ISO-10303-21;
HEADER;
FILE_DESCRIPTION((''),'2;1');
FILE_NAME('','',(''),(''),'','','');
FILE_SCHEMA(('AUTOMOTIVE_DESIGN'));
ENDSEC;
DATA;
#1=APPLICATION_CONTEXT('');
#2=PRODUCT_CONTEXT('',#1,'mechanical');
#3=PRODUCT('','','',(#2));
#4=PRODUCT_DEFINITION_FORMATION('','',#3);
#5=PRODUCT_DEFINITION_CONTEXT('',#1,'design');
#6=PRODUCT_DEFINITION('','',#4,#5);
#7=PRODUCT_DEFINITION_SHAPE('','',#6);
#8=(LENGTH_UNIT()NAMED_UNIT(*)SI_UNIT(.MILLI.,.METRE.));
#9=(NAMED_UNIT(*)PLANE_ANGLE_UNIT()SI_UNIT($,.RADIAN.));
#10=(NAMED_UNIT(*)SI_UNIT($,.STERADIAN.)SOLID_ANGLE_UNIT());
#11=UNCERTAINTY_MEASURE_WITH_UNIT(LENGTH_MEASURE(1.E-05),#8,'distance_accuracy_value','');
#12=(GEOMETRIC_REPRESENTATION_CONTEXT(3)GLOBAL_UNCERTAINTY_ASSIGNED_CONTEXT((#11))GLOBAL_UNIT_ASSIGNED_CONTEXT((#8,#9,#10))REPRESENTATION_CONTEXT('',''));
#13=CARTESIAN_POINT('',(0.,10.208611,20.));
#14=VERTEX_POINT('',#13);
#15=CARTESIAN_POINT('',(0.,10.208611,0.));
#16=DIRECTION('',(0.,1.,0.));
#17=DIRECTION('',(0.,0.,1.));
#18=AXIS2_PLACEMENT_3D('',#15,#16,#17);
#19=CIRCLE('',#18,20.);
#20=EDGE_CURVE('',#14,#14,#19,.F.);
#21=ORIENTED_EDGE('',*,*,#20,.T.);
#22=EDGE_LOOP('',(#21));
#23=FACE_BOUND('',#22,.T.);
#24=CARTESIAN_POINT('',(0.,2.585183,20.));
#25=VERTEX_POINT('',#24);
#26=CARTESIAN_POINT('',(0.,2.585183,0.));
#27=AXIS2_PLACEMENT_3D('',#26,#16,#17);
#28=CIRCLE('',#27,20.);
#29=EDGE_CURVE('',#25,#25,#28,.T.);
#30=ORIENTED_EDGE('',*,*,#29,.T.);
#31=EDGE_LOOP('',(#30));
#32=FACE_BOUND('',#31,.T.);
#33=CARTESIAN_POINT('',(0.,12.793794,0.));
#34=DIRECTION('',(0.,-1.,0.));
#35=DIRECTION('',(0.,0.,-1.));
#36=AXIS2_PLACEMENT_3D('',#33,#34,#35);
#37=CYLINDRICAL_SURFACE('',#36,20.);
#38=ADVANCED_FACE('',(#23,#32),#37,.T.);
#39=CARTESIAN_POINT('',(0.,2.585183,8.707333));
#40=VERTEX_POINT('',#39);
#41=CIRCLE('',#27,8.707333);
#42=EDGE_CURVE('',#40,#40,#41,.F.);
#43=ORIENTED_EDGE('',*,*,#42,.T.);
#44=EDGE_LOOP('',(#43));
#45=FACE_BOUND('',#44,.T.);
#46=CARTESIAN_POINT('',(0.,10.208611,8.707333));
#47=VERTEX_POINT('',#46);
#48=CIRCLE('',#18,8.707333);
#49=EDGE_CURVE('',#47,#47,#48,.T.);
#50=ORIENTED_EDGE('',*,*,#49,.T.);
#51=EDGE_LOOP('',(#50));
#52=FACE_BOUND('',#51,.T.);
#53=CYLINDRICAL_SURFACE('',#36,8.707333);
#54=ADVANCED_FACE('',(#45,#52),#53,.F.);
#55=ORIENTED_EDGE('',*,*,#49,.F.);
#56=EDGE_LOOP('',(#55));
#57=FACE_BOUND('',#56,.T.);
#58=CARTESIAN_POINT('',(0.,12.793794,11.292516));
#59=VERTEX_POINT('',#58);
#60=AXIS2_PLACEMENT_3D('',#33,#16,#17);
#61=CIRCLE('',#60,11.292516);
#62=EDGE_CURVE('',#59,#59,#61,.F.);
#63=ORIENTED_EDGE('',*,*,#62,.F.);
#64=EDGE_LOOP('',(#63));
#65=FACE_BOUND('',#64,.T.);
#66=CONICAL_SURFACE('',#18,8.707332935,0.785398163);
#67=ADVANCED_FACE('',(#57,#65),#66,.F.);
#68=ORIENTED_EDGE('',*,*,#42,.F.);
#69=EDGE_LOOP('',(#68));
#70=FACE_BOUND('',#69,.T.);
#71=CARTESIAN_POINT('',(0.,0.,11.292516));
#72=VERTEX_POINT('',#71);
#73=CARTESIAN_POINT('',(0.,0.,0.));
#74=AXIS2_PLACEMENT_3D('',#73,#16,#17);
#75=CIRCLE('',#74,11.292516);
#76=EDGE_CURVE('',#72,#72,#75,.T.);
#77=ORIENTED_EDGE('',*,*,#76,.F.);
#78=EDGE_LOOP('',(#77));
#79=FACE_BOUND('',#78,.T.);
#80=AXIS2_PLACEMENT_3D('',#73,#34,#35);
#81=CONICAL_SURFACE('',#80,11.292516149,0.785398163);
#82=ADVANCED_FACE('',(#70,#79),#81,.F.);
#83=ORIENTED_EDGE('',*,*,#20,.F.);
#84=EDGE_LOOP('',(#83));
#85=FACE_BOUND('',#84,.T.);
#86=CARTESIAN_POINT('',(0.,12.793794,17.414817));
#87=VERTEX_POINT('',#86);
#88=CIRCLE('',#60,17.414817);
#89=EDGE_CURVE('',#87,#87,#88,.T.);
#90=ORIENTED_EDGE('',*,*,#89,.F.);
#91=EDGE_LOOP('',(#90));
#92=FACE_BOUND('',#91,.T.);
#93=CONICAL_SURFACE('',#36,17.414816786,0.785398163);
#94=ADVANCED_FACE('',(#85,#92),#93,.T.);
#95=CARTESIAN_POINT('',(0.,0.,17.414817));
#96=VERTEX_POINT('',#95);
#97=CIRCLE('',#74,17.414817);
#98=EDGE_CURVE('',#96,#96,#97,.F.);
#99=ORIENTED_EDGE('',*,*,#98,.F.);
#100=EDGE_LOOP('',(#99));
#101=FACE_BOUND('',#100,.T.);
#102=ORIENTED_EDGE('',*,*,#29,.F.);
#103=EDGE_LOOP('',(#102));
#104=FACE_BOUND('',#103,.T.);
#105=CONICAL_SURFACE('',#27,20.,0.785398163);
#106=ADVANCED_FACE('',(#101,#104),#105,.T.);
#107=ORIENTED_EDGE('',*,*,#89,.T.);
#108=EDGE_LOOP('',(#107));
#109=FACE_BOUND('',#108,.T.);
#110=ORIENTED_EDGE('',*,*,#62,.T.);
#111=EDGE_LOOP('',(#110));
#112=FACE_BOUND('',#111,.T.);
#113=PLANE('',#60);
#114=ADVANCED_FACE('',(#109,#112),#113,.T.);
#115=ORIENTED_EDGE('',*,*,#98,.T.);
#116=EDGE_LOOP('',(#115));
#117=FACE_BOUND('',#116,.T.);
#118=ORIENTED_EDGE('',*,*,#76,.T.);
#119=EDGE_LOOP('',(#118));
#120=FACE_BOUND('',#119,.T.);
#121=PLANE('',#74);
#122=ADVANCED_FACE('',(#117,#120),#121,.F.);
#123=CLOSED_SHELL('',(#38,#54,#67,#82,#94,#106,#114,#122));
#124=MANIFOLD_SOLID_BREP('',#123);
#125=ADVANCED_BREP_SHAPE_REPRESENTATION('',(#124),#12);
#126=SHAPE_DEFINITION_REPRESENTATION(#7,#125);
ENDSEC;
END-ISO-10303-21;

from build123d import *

# Parameters (mm, degrees)
SKETCH1_R           = 20
BOSS_EXTRUDE1_DEPTH = 12.793794057
SKETCH2_R           = 8.707332935
CUT_EXTRUDE1_DEPTH  = 32.043214498
CHAMFER1_SIZE       = 2.585183214


with BuildPart() as part:
    # Sketch1 → Boss-Extrude1 (new body)
    with BuildSketch(Plane(origin=(0, 0, 0), x_dir=(1, 0, 0), z_dir=(0, 1, 0))):
        Circle(SKETCH1_R)
    extrude(amount=BOSS_EXTRUDE1_DEPTH)

    # Sketch2 → Cut-Extrude1 (cut, through all)
    with BuildSketch(Plane(origin=(0, 0, 0), x_dir=(1, 0, 0), z_dir=(0, 1, 0))):
        Circle(SKETCH2_R)
    extrude(amount=CUT_EXTRUDE1_DEPTH, mode=Mode.SUBTRACT)

    # Chamfer1
    chamfer1_edges = [part.edges().sort_by_distance(p)[0] for p in [
        (-8.707332935, 12.793794057, 0),
        (-8.707332935, 0, 0),
        (-20, 0, 0),
        (-20, 12.793794057, 0),
    ]]
    chamfer(chamfer1_edges, length=CHAMFER1_SIZE)


solid = part.part
